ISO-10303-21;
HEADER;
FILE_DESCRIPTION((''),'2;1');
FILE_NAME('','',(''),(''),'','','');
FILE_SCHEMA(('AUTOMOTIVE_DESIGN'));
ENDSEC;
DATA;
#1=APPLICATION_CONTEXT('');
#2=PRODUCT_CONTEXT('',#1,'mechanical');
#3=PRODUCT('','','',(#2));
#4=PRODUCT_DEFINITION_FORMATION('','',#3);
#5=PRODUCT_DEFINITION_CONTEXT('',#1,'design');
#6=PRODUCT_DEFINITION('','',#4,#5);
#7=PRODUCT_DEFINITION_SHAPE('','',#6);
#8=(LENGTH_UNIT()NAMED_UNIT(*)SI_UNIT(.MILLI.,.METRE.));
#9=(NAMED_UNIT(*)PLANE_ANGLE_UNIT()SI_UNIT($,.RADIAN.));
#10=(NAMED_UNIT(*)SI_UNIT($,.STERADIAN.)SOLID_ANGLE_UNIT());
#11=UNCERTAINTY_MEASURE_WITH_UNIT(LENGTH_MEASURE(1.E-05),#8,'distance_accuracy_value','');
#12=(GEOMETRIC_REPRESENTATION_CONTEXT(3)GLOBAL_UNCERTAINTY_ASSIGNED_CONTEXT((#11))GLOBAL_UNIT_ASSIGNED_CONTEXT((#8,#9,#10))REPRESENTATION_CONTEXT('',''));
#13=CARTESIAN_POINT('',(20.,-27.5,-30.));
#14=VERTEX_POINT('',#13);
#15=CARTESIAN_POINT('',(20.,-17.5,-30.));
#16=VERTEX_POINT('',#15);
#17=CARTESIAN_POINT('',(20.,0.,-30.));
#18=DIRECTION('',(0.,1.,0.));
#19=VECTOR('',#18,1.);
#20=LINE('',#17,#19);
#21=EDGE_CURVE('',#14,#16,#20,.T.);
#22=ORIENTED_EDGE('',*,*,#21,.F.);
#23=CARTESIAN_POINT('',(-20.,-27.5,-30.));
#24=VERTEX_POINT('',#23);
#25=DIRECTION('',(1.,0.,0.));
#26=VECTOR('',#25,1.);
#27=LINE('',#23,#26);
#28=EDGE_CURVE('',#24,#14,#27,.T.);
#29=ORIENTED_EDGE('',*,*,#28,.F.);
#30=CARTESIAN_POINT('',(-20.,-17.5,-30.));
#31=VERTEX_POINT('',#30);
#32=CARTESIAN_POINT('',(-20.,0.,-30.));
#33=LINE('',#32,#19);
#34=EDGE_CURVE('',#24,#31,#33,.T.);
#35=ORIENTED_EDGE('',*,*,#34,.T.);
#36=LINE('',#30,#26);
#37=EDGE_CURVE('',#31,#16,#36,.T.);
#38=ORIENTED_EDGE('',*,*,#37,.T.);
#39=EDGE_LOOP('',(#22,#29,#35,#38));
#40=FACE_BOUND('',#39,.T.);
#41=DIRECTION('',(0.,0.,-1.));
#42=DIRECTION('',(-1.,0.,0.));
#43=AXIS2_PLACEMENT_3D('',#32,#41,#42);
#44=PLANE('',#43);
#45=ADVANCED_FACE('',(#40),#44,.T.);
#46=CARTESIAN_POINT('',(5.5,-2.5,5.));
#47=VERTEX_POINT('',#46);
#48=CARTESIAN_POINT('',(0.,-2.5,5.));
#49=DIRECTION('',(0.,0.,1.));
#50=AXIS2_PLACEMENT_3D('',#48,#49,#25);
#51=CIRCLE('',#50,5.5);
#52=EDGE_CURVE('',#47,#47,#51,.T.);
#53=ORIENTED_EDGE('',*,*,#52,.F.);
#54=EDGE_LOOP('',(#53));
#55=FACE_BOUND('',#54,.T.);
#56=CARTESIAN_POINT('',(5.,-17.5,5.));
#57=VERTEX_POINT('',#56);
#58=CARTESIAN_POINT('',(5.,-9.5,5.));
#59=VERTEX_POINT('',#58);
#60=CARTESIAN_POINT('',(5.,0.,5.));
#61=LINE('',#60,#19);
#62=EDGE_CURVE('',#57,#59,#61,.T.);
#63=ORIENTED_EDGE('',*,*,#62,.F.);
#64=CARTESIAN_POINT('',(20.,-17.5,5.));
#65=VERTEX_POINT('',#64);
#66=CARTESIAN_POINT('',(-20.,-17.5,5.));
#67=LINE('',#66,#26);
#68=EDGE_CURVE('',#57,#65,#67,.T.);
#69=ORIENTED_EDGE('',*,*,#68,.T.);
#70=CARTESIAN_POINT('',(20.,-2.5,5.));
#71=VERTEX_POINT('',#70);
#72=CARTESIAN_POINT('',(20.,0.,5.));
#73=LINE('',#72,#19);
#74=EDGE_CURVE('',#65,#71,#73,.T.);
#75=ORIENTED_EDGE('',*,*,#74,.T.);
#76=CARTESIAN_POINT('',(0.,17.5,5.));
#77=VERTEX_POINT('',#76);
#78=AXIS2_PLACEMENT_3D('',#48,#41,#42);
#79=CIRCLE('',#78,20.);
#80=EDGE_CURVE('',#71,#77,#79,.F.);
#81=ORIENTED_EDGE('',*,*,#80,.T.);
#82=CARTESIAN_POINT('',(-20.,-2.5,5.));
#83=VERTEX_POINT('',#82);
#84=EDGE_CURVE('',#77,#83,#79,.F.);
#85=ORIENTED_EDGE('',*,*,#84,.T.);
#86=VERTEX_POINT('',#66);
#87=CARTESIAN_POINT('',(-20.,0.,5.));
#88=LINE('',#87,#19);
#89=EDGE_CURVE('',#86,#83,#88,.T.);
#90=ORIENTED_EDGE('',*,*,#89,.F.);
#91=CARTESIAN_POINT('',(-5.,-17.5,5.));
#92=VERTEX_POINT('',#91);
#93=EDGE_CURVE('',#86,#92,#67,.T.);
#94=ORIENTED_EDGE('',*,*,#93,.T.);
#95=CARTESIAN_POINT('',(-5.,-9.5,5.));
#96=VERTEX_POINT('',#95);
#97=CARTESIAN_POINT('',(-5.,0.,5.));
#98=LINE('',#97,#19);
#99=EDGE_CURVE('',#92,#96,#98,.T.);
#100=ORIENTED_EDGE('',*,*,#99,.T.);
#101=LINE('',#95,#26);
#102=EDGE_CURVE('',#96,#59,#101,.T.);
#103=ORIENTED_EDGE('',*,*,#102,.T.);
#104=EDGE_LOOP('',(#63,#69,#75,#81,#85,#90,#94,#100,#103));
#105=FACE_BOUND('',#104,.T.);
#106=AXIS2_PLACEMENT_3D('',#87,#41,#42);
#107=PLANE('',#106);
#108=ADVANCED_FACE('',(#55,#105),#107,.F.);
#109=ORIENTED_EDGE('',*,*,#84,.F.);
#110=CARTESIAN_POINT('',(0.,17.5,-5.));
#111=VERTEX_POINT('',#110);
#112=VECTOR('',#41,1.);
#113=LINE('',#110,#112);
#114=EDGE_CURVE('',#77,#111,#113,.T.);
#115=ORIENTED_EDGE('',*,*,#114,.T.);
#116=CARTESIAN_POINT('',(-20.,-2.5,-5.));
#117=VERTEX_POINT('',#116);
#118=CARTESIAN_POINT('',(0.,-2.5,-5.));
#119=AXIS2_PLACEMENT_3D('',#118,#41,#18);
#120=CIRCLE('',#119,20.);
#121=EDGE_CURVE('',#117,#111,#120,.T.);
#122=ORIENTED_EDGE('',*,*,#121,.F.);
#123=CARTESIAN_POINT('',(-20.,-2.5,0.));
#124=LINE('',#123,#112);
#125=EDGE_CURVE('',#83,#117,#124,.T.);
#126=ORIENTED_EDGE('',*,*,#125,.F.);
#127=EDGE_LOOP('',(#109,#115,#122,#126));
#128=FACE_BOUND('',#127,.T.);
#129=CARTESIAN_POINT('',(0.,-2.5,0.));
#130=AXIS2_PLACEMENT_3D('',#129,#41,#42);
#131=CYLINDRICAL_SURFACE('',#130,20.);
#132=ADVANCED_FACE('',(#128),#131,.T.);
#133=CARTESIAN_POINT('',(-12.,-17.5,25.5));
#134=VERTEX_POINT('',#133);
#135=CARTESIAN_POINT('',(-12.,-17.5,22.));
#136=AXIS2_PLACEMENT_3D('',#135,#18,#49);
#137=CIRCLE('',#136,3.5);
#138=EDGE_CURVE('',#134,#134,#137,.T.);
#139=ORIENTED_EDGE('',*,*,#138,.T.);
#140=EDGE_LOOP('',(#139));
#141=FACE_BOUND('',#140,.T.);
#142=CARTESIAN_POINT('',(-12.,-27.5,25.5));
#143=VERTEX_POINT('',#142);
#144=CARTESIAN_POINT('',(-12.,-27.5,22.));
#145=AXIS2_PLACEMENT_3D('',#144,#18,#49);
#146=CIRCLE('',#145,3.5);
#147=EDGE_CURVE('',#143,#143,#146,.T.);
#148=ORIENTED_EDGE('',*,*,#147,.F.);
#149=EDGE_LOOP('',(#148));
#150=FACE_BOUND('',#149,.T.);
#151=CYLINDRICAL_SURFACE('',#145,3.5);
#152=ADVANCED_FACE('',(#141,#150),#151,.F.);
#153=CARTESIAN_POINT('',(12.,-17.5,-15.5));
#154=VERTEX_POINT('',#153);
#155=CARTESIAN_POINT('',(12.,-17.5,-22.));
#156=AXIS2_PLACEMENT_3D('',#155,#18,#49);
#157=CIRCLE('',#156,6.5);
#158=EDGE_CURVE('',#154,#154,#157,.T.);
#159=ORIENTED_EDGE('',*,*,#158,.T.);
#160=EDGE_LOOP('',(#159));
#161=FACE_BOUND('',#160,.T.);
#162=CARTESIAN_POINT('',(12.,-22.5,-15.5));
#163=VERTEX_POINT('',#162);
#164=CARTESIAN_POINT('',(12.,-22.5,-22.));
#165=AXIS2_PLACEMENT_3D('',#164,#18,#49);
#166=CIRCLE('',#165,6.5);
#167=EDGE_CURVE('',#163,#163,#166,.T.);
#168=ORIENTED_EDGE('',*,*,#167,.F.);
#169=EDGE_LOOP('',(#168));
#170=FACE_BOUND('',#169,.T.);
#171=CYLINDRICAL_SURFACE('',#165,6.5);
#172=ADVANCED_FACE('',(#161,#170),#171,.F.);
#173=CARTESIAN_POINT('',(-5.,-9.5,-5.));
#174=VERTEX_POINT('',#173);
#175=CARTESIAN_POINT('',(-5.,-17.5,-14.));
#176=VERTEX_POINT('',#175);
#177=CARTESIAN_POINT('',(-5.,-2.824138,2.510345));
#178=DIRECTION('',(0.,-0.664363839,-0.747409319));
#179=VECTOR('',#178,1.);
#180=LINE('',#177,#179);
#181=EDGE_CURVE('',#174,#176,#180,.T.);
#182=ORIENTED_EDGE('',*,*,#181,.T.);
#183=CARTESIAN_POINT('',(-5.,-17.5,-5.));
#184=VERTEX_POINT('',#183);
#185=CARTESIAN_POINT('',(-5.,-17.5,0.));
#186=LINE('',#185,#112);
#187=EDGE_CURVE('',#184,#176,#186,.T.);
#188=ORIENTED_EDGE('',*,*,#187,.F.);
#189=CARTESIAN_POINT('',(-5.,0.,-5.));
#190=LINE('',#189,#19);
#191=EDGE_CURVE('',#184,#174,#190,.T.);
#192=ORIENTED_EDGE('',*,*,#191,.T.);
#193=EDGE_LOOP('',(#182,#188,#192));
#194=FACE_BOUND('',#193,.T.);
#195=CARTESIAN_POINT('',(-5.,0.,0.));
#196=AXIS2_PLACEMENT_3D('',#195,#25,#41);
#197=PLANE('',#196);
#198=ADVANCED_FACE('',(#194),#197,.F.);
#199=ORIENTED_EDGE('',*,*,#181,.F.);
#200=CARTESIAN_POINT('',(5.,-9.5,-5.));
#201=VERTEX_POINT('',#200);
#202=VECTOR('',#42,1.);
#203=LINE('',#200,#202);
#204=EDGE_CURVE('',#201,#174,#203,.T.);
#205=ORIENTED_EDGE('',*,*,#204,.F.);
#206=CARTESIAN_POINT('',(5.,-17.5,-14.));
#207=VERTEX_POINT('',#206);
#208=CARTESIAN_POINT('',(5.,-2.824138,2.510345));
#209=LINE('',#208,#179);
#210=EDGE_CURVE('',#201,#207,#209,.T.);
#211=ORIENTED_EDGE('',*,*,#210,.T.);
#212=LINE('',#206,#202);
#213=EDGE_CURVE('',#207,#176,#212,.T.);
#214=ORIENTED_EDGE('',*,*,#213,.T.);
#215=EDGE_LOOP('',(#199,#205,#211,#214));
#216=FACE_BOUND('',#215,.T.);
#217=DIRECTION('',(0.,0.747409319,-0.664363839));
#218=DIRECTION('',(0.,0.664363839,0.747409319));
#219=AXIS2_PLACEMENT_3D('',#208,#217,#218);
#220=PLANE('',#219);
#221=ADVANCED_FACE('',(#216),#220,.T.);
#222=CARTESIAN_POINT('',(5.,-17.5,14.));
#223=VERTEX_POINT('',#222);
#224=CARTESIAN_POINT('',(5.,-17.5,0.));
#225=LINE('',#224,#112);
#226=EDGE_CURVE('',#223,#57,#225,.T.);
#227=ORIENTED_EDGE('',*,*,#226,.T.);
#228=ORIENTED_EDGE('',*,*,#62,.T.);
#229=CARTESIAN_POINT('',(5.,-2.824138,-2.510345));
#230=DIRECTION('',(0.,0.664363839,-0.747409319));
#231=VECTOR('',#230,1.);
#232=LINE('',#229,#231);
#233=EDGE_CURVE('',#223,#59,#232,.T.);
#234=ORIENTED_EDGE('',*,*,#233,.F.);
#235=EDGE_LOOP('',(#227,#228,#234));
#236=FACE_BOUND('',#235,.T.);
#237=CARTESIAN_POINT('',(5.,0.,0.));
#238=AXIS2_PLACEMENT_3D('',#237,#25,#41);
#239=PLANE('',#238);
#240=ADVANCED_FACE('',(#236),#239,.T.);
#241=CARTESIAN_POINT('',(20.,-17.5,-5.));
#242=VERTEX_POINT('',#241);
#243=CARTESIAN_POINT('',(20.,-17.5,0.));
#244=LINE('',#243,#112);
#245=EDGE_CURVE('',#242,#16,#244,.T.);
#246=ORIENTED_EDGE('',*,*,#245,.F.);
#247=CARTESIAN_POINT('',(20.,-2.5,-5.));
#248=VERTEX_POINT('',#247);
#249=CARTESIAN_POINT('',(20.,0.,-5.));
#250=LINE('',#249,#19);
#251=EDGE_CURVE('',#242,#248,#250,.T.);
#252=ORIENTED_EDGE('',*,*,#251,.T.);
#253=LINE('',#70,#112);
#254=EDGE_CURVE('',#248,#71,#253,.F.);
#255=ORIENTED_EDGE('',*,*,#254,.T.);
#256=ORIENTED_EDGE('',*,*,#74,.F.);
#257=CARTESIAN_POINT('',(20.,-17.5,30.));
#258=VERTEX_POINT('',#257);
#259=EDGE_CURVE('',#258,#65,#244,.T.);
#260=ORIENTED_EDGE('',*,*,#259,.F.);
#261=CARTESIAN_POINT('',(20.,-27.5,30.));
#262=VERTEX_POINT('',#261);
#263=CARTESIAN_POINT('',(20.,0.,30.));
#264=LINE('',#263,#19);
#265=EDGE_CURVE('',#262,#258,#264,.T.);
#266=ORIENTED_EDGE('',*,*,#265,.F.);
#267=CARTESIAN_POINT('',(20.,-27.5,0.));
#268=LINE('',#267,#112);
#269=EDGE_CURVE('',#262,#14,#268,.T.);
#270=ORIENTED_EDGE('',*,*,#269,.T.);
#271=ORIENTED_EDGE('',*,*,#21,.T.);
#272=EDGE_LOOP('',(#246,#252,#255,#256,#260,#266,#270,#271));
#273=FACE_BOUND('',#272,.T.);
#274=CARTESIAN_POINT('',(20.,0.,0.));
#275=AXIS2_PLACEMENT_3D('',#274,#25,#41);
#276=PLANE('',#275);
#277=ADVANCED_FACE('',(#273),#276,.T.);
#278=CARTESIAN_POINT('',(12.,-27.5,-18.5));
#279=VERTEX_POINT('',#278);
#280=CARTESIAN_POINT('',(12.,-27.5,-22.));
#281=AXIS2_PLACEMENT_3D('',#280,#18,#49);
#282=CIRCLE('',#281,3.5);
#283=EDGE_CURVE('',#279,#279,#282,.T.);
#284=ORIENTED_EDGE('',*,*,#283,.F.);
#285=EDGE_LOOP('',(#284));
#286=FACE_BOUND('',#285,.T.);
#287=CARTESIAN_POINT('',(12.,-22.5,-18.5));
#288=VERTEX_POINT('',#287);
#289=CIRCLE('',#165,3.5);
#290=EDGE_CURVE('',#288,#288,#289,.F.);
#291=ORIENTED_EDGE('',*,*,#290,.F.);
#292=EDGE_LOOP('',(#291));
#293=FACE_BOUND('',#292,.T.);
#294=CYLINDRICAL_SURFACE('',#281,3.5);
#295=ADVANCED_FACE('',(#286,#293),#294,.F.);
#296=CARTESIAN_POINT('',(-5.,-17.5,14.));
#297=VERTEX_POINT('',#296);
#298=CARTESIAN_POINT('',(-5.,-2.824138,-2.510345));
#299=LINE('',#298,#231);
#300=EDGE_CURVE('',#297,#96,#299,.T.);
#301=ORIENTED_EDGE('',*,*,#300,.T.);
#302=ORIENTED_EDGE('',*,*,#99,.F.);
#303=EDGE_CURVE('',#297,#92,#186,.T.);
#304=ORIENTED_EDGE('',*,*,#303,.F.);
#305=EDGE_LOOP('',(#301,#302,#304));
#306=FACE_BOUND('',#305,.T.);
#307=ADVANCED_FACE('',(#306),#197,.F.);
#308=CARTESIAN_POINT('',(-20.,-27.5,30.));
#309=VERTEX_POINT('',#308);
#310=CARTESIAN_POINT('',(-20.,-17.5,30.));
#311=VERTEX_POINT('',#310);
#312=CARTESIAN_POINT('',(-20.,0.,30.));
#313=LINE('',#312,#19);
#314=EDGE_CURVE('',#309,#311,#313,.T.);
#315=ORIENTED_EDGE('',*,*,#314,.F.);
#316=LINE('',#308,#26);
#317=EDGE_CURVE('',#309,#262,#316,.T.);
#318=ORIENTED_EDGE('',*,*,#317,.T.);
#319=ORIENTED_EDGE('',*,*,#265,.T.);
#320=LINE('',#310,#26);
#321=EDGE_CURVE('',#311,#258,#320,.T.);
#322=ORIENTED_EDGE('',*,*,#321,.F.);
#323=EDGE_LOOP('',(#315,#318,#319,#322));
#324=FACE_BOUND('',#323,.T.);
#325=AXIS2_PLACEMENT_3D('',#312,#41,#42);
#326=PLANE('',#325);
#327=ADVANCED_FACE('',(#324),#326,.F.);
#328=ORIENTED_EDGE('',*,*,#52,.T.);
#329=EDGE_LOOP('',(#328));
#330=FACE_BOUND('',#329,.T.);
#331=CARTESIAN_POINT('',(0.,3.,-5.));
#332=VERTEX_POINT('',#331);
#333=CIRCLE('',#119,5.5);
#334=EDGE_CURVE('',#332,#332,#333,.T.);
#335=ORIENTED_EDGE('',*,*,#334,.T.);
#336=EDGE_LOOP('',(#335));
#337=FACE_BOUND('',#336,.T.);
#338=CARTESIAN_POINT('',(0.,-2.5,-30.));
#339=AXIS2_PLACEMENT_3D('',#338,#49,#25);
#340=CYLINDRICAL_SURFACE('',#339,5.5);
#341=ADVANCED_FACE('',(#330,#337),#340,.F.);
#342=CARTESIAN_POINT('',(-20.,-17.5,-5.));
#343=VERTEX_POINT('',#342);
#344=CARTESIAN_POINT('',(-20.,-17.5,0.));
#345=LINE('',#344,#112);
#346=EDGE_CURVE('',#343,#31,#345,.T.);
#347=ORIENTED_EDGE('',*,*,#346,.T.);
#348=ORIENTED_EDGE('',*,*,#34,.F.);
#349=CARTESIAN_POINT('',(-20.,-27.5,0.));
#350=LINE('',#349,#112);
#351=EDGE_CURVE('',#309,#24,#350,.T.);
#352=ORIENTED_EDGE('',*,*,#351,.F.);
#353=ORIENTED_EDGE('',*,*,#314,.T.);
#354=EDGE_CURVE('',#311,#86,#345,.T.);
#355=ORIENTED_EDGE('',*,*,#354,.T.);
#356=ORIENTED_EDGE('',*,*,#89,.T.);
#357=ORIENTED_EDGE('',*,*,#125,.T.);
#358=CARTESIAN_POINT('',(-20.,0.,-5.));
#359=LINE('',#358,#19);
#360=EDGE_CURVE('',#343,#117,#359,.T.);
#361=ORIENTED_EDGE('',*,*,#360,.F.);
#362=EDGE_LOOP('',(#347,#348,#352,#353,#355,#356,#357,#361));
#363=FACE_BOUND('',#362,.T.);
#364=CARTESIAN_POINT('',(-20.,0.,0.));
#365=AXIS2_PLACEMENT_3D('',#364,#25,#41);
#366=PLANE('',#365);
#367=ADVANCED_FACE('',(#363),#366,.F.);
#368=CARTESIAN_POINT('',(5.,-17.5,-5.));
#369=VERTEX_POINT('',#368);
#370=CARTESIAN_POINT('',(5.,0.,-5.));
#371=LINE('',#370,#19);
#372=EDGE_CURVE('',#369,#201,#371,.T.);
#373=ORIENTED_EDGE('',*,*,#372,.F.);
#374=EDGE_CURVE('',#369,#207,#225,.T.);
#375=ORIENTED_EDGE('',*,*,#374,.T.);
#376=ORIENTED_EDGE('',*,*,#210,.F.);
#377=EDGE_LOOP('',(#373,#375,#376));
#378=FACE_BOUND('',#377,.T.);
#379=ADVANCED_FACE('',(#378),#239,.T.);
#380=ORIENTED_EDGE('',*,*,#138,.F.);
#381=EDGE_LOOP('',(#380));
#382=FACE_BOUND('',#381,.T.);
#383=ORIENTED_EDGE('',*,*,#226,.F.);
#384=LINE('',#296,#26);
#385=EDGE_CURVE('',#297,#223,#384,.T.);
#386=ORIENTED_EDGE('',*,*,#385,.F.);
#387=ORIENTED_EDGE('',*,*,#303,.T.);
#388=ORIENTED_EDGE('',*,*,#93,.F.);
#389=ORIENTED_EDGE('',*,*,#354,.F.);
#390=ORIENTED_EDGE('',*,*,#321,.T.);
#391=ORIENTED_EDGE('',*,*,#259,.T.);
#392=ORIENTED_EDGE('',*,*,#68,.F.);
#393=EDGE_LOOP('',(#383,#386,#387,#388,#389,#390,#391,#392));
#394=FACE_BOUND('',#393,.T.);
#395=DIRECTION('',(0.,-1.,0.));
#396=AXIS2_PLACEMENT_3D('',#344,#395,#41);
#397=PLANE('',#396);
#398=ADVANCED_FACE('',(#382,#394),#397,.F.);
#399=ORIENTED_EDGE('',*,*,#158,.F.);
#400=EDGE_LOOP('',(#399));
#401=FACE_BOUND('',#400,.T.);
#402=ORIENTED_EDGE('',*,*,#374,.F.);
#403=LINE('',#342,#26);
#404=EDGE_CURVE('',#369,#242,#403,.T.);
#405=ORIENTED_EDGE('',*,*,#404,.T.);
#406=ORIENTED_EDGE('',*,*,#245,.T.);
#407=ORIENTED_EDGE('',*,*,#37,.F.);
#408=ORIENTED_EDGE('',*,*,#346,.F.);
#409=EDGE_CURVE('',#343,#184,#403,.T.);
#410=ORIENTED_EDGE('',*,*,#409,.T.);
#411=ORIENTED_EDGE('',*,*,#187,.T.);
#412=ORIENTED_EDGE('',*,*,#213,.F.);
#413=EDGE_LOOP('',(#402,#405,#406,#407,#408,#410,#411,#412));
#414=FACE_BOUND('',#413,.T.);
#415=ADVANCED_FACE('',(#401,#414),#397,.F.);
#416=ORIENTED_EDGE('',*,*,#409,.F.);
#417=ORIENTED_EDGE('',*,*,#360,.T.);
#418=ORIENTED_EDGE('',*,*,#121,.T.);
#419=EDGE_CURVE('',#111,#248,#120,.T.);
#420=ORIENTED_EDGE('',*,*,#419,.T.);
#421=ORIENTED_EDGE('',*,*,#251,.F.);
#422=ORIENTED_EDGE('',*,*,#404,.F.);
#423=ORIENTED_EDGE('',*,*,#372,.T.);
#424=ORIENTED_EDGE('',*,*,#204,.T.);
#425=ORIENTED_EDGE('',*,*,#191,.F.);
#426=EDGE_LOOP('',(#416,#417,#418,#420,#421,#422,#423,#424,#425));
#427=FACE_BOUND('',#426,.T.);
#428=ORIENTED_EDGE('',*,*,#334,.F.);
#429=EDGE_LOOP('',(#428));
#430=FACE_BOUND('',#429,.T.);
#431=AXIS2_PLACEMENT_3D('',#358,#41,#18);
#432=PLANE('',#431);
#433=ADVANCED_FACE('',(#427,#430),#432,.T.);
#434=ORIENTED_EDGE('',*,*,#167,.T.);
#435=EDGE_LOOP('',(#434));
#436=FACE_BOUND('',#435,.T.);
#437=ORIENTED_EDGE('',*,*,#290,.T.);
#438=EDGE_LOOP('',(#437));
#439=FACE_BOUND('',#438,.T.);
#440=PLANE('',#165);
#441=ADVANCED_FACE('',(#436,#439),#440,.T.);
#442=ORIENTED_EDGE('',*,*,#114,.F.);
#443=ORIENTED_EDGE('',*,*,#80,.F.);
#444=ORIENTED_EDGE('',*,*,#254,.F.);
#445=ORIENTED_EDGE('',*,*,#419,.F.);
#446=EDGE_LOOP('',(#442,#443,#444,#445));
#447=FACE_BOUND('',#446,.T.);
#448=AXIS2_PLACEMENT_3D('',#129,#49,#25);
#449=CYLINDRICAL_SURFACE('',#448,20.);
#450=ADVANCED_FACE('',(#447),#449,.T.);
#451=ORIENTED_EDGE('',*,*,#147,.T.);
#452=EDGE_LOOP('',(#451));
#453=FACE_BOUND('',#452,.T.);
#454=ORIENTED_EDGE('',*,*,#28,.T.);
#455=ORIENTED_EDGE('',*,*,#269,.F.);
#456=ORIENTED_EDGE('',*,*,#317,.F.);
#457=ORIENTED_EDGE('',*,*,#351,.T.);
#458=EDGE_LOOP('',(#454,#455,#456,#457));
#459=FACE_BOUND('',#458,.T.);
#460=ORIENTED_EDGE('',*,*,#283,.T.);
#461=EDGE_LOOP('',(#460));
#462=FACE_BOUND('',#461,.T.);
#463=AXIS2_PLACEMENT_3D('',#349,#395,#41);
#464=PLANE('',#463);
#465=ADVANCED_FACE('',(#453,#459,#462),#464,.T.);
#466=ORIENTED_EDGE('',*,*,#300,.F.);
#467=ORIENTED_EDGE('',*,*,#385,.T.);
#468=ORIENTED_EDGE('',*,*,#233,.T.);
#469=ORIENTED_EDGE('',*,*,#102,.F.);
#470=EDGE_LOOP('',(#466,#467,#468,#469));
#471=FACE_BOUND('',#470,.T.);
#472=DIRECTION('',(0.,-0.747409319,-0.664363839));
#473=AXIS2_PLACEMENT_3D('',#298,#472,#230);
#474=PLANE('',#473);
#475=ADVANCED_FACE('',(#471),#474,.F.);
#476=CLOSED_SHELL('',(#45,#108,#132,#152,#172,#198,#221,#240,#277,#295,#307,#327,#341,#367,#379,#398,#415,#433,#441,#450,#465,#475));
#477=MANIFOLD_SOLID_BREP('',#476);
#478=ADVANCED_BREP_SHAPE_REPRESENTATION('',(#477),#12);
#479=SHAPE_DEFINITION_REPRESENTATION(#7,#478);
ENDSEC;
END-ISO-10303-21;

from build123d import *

# Parameters (mm, degrees)
EXTRUDE_1_DEPTH      = 20
EXTRUDE_1_DEPTH_BACK = 20
SKETCH_1_W           = 10
SKETCH_1_H           = 35
FILLET_1_R           = 20
SKETCH_2_R           = 5.5
CUT_EXTRUDE_1_DEPTH  = 49.79805324
EXTRUDE_2_DEPTH      = 5
EXTRUDE_2_DEPTH_BACK = 5
SKETCH_3_R           = 3.5
CUT_EXTRUDE_2_DEPTH  = 51.249378106
SKETCH_4_R           = 6.5
CUT_EXTRUDE_3_DEPTH  = 5


with BuildPart() as part:
    # Эскиз1 → Бобышка-Вытянуть1 (new, two sides: drawn at the far end of the back side and taken through both)
    with BuildSketch(Plane(origin=(0, 0, 0), x_dir=(0, 0, -1), z_dir=(1, 0, 0)).offset(-EXTRUDE_1_DEPTH_BACK)):
        Rectangle(SKETCH_1_W, SKETCH_1_H)
        Polygon((-5, -17.5), (-14, -17.5), (-30, -17.5), (-30, -27.5), (30, -27.5), (30, -17.5), (14, -17.5), (5, -17.5), align=None)
    extrude(amount=EXTRUDE_1_DEPTH + EXTRUDE_1_DEPTH_BACK)

    # Скругление1
    fillet_1_edges = [part.edges().sort_by_distance(p)[0] for p in [
        (-20, 17.5, 0),
        (20, 17.5, 0),
    ]]
    fillet(fillet_1_edges, radius=FILLET_1_R - 0.0001)  # a hair under: the kernel refuses the full size

    # Эскиз2 → Вырез-Вытянуть1 (cut, through all)
    with BuildSketch(Plane.XY.offset(5)):
        with Locations((0, -2.5)):
            Circle(SKETCH_2_R)
    extrude(amount=-CUT_EXTRUDE_1_DEPTH, mode=Mode.SUBTRACT)

    # Эскиз1<3> → Бобышка-Вытянуть2 (add, two sides: drawn at the far end of the back side and taken through both)
    with BuildSketch(Plane(origin=(0, 0, 0), x_dir=(0, 0, -1), z_dir=(1, 0, 0)).offset(-EXTRUDE_2_DEPTH_BACK)):
        Polygon((-5, -9.5), (-14, -17.5), (-5, -17.5), align=None)
        Polygon((5, -9.5), (5, -17.5), (14, -17.5), align=None)
    extrude(amount=EXTRUDE_2_DEPTH + EXTRUDE_2_DEPTH_BACK)

    # Эскиз3 → Вырез-Вытянуть2 (cut, through all)
    with BuildSketch(Plane(origin=(0, -17.5, 0), x_dir=(1, 0, 0), z_dir=(0, 1, 0))):
        with Locations(Location((-12, -22, 0), (0, 0, 270))):
            Circle(SKETCH_3_R)
        with Locations(Location((12, 22, 0), (0, 0, 270))):
            Circle(SKETCH_3_R)
    extrude(amount=-CUT_EXTRUDE_2_DEPTH, mode=Mode.SUBTRACT)

    # Эскиз4 → Вырез-Вытянуть3 (cut)
    with BuildSketch(Plane(origin=(0, -17.5, 0), x_dir=(1, 0, 0), z_dir=(0, 1, 0))):
        with Locations(Location((12, 22, 0), (0, 0, 270))):
            Circle(SKETCH_4_R)
    extrude(amount=-CUT_EXTRUDE_3_DEPTH, mode=Mode.SUBTRACT)


solid = part.part
